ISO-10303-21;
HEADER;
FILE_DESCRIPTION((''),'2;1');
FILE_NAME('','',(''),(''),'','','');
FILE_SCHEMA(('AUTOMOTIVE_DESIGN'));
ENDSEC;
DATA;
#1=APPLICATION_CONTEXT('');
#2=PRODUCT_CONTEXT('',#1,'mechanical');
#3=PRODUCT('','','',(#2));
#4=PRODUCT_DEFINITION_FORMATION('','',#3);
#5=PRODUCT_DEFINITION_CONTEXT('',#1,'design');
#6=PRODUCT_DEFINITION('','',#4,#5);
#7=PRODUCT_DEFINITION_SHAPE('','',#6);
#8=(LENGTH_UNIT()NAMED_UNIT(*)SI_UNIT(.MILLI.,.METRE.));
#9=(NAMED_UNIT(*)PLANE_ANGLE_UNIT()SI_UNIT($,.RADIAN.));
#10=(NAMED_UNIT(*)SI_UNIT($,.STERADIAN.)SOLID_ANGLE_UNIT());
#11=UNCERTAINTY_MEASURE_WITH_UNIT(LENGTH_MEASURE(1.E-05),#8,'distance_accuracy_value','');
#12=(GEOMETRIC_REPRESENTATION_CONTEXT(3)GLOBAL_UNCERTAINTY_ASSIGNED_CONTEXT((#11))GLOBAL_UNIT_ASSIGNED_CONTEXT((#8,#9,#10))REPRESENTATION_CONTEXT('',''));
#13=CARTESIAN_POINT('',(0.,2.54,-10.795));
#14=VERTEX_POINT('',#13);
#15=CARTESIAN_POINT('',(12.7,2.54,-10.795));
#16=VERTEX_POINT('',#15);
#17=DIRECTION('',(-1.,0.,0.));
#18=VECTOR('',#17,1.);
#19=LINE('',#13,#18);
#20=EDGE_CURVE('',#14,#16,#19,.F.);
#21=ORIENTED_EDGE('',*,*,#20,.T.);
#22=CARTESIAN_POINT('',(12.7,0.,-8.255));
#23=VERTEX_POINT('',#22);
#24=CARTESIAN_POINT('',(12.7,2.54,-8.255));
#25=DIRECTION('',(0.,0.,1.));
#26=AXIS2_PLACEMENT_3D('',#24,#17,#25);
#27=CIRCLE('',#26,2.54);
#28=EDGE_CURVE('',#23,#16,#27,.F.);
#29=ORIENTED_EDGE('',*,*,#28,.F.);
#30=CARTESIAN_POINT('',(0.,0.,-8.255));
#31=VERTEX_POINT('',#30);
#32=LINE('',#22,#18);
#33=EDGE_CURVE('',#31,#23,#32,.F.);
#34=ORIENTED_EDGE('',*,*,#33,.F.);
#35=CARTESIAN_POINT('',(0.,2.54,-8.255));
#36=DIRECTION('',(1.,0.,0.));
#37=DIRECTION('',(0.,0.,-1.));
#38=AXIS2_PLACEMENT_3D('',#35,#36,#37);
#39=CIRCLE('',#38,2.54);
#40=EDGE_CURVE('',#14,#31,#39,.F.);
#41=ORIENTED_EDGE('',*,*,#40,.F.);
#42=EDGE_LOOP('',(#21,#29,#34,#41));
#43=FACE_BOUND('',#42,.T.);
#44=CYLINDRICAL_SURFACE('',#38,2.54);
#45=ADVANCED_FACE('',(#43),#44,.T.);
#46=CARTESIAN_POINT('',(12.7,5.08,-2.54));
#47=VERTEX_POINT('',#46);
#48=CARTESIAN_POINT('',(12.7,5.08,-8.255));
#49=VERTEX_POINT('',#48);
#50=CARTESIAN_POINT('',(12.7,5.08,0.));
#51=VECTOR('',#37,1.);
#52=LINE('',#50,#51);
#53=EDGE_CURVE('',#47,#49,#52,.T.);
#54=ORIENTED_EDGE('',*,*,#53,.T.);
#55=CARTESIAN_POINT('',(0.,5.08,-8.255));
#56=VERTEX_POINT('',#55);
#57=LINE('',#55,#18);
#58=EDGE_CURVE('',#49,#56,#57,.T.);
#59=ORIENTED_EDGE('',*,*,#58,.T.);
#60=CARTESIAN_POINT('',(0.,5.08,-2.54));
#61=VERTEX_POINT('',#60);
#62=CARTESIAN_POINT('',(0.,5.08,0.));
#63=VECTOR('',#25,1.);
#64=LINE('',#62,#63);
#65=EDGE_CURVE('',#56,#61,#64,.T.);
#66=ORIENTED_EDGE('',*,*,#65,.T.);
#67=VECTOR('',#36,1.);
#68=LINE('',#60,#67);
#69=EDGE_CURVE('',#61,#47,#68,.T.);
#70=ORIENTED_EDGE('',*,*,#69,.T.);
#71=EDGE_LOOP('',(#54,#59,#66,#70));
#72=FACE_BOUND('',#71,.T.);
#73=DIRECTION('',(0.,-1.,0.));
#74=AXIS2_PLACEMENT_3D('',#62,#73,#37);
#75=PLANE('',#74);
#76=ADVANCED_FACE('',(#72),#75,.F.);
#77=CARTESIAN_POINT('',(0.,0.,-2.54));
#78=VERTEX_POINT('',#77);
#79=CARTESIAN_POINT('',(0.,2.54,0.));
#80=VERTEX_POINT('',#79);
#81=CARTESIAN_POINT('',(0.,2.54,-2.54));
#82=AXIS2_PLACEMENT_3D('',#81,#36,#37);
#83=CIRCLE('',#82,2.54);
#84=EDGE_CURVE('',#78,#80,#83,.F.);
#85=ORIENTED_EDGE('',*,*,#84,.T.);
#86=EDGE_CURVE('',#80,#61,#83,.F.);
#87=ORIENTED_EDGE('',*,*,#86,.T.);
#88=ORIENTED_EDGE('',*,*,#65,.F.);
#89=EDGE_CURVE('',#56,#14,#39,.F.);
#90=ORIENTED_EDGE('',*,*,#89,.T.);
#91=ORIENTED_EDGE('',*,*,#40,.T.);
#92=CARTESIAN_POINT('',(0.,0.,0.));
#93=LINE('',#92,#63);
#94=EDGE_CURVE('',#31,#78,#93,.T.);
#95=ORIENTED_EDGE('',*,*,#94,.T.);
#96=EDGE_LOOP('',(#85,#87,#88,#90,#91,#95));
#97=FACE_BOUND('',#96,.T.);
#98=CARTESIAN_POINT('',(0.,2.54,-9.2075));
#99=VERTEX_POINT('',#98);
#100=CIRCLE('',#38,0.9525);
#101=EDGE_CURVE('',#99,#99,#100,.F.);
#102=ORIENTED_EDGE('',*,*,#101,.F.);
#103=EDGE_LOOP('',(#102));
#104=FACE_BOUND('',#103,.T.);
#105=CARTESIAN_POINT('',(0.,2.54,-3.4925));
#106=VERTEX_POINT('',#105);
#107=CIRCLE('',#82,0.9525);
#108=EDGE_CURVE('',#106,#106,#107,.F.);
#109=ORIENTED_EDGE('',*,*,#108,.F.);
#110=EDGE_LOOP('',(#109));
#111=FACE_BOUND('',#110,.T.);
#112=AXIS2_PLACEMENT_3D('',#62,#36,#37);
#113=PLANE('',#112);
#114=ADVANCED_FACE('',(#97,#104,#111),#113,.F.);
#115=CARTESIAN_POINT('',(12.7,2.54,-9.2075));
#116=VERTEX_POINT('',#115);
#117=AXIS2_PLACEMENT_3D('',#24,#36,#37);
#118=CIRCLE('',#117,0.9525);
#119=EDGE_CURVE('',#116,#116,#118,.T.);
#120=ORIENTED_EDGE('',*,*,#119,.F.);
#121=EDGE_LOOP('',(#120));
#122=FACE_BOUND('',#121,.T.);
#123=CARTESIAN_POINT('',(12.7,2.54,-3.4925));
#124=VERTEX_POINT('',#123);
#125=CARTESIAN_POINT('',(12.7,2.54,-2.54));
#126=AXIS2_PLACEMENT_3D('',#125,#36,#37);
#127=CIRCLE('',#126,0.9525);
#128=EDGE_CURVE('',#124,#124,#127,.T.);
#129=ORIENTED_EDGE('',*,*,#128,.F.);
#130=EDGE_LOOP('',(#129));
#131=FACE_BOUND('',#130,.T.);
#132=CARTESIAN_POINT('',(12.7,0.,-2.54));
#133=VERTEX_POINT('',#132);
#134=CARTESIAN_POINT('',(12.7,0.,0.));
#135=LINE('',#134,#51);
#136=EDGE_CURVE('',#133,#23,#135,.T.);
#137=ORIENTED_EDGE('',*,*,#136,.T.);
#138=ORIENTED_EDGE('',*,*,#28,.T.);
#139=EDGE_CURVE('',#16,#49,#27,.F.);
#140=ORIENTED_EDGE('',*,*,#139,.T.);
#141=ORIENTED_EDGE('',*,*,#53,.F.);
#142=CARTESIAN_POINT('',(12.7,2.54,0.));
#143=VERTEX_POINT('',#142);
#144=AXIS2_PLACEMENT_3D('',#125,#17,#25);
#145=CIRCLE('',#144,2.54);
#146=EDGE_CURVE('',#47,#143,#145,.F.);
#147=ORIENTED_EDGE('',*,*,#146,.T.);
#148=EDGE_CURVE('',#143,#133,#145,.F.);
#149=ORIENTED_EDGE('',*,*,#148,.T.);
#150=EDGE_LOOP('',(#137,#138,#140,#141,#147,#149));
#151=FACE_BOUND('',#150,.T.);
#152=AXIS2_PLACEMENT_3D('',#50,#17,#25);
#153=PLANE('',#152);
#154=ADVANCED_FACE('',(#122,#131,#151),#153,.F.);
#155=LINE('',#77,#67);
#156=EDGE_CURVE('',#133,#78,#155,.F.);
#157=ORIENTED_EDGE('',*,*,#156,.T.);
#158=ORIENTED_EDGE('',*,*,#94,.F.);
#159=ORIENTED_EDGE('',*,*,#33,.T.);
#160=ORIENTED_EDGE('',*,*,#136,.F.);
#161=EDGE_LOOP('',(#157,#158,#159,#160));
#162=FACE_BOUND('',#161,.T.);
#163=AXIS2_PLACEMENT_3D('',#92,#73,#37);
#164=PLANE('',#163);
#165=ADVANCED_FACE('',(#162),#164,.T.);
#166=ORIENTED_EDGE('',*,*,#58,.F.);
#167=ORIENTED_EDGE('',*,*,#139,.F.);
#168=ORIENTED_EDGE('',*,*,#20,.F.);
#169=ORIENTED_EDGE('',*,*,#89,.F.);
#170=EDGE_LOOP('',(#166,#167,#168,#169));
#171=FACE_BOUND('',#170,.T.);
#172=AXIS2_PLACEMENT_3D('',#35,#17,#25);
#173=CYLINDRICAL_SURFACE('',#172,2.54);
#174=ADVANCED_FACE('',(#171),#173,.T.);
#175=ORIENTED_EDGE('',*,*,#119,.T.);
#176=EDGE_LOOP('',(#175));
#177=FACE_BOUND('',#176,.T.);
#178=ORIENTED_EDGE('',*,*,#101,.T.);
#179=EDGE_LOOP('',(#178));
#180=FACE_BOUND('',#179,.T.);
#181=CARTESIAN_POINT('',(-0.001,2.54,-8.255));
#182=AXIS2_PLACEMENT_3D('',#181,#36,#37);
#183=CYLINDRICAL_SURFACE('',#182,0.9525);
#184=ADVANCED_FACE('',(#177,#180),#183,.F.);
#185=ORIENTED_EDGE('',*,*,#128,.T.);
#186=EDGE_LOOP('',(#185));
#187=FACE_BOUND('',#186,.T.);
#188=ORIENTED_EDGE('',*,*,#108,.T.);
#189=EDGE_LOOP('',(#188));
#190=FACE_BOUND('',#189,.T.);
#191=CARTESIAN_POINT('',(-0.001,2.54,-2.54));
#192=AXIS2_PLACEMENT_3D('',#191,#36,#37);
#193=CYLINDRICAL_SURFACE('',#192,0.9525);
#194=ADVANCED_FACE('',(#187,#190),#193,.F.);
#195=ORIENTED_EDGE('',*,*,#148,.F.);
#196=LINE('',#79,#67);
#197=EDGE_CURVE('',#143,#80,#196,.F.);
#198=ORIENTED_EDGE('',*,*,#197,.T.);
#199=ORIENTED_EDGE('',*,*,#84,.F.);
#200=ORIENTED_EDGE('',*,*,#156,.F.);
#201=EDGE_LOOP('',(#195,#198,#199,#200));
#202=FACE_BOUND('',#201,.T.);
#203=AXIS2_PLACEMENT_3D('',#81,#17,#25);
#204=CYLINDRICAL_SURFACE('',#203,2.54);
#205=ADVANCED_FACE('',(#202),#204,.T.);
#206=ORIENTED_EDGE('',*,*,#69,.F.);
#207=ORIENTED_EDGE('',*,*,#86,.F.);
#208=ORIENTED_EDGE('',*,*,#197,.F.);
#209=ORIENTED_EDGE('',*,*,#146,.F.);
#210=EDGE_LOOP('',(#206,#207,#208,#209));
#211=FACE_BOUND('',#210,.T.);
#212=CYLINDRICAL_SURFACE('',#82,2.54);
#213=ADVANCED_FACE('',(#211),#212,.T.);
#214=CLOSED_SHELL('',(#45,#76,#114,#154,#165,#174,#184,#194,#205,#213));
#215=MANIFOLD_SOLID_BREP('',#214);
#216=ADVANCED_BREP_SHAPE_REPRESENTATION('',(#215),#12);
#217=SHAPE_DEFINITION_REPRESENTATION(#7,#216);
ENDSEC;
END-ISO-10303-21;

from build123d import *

# Parameters (mm, degrees)
SKETCH1_W           = 12.7
SKETCH1_H           = 10.795
BOSS_EXTRUDE1_DEPTH = 5.08
CUT_EXTRUDE1_REACH  = 19.425
SKETCH2_R           = 0.9525
FILLET1_R           = 2.54


with BuildPart() as part:
    # Sketch1 → Boss-Extrude1 (new body)
    with BuildSketch(Plane(origin=(0, 0, 0), x_dir=(1, 0, 0), z_dir=(0, 1, 0))):
        with Locations((6.35, 5.3975)):
            Rectangle(SKETCH1_W, SKETCH1_H)
    extrude(amount=BOSS_EXTRUDE1_DEPTH)

    # Sketch2 → Cut-Extrude1 (cut, up to next)
    with BuildSketch(Plane(origin=(12.7, 0, 0), x_dir=(0, 0, -1), z_dir=(1, 0, 0)), mode=Mode.PRIVATE) as cut_extrude1_sk1:
        with Locations((2.54, 2.54)):
            Circle(SKETCH2_R)
    cut_extrude1_tool1 = extrude(cut_extrude1_sk1.sketch, amount=-CUT_EXTRUDE1_REACH, mode=Mode.PRIVATE) & part.part
    # Sketch2 → Cut-Extrude1 (cut, up to next)
    with BuildSketch(Plane(origin=(12.7, 0, 0), x_dir=(0, 0, -1), z_dir=(1, 0, 0)), mode=Mode.PRIVATE) as cut_extrude1_sk2:
        with Locations((8.255, 2.54)):
            Circle(SKETCH2_R)
    cut_extrude1_tool2 = extrude(cut_extrude1_sk2.sketch, amount=-CUT_EXTRUDE1_REACH, mode=Mode.PRIVATE) & part.part
    add(cut_extrude1_tool1.solids().sort_by_distance((12.7, 2.54, -2.54))[0], mode=Mode.SUBTRACT)
    add(cut_extrude1_tool2.solids().sort_by_distance((12.7, 2.54, -8.255))[0], mode=Mode.SUBTRACT)

    # Fillet1
    fillet1_edges = [part.edges().sort_by_distance(p)[0] for p in [
        (6.35, 0, -10.795),
        (6.35, 5.08, -10.795),
        (6.35, 0, 0),
        (6.35, 5.08, 0),
    ]]
    fillet(fillet1_edges, radius=FILLET1_R - 0.0001)  # a hair under: the kernel refuses the full size


solid = part.part
